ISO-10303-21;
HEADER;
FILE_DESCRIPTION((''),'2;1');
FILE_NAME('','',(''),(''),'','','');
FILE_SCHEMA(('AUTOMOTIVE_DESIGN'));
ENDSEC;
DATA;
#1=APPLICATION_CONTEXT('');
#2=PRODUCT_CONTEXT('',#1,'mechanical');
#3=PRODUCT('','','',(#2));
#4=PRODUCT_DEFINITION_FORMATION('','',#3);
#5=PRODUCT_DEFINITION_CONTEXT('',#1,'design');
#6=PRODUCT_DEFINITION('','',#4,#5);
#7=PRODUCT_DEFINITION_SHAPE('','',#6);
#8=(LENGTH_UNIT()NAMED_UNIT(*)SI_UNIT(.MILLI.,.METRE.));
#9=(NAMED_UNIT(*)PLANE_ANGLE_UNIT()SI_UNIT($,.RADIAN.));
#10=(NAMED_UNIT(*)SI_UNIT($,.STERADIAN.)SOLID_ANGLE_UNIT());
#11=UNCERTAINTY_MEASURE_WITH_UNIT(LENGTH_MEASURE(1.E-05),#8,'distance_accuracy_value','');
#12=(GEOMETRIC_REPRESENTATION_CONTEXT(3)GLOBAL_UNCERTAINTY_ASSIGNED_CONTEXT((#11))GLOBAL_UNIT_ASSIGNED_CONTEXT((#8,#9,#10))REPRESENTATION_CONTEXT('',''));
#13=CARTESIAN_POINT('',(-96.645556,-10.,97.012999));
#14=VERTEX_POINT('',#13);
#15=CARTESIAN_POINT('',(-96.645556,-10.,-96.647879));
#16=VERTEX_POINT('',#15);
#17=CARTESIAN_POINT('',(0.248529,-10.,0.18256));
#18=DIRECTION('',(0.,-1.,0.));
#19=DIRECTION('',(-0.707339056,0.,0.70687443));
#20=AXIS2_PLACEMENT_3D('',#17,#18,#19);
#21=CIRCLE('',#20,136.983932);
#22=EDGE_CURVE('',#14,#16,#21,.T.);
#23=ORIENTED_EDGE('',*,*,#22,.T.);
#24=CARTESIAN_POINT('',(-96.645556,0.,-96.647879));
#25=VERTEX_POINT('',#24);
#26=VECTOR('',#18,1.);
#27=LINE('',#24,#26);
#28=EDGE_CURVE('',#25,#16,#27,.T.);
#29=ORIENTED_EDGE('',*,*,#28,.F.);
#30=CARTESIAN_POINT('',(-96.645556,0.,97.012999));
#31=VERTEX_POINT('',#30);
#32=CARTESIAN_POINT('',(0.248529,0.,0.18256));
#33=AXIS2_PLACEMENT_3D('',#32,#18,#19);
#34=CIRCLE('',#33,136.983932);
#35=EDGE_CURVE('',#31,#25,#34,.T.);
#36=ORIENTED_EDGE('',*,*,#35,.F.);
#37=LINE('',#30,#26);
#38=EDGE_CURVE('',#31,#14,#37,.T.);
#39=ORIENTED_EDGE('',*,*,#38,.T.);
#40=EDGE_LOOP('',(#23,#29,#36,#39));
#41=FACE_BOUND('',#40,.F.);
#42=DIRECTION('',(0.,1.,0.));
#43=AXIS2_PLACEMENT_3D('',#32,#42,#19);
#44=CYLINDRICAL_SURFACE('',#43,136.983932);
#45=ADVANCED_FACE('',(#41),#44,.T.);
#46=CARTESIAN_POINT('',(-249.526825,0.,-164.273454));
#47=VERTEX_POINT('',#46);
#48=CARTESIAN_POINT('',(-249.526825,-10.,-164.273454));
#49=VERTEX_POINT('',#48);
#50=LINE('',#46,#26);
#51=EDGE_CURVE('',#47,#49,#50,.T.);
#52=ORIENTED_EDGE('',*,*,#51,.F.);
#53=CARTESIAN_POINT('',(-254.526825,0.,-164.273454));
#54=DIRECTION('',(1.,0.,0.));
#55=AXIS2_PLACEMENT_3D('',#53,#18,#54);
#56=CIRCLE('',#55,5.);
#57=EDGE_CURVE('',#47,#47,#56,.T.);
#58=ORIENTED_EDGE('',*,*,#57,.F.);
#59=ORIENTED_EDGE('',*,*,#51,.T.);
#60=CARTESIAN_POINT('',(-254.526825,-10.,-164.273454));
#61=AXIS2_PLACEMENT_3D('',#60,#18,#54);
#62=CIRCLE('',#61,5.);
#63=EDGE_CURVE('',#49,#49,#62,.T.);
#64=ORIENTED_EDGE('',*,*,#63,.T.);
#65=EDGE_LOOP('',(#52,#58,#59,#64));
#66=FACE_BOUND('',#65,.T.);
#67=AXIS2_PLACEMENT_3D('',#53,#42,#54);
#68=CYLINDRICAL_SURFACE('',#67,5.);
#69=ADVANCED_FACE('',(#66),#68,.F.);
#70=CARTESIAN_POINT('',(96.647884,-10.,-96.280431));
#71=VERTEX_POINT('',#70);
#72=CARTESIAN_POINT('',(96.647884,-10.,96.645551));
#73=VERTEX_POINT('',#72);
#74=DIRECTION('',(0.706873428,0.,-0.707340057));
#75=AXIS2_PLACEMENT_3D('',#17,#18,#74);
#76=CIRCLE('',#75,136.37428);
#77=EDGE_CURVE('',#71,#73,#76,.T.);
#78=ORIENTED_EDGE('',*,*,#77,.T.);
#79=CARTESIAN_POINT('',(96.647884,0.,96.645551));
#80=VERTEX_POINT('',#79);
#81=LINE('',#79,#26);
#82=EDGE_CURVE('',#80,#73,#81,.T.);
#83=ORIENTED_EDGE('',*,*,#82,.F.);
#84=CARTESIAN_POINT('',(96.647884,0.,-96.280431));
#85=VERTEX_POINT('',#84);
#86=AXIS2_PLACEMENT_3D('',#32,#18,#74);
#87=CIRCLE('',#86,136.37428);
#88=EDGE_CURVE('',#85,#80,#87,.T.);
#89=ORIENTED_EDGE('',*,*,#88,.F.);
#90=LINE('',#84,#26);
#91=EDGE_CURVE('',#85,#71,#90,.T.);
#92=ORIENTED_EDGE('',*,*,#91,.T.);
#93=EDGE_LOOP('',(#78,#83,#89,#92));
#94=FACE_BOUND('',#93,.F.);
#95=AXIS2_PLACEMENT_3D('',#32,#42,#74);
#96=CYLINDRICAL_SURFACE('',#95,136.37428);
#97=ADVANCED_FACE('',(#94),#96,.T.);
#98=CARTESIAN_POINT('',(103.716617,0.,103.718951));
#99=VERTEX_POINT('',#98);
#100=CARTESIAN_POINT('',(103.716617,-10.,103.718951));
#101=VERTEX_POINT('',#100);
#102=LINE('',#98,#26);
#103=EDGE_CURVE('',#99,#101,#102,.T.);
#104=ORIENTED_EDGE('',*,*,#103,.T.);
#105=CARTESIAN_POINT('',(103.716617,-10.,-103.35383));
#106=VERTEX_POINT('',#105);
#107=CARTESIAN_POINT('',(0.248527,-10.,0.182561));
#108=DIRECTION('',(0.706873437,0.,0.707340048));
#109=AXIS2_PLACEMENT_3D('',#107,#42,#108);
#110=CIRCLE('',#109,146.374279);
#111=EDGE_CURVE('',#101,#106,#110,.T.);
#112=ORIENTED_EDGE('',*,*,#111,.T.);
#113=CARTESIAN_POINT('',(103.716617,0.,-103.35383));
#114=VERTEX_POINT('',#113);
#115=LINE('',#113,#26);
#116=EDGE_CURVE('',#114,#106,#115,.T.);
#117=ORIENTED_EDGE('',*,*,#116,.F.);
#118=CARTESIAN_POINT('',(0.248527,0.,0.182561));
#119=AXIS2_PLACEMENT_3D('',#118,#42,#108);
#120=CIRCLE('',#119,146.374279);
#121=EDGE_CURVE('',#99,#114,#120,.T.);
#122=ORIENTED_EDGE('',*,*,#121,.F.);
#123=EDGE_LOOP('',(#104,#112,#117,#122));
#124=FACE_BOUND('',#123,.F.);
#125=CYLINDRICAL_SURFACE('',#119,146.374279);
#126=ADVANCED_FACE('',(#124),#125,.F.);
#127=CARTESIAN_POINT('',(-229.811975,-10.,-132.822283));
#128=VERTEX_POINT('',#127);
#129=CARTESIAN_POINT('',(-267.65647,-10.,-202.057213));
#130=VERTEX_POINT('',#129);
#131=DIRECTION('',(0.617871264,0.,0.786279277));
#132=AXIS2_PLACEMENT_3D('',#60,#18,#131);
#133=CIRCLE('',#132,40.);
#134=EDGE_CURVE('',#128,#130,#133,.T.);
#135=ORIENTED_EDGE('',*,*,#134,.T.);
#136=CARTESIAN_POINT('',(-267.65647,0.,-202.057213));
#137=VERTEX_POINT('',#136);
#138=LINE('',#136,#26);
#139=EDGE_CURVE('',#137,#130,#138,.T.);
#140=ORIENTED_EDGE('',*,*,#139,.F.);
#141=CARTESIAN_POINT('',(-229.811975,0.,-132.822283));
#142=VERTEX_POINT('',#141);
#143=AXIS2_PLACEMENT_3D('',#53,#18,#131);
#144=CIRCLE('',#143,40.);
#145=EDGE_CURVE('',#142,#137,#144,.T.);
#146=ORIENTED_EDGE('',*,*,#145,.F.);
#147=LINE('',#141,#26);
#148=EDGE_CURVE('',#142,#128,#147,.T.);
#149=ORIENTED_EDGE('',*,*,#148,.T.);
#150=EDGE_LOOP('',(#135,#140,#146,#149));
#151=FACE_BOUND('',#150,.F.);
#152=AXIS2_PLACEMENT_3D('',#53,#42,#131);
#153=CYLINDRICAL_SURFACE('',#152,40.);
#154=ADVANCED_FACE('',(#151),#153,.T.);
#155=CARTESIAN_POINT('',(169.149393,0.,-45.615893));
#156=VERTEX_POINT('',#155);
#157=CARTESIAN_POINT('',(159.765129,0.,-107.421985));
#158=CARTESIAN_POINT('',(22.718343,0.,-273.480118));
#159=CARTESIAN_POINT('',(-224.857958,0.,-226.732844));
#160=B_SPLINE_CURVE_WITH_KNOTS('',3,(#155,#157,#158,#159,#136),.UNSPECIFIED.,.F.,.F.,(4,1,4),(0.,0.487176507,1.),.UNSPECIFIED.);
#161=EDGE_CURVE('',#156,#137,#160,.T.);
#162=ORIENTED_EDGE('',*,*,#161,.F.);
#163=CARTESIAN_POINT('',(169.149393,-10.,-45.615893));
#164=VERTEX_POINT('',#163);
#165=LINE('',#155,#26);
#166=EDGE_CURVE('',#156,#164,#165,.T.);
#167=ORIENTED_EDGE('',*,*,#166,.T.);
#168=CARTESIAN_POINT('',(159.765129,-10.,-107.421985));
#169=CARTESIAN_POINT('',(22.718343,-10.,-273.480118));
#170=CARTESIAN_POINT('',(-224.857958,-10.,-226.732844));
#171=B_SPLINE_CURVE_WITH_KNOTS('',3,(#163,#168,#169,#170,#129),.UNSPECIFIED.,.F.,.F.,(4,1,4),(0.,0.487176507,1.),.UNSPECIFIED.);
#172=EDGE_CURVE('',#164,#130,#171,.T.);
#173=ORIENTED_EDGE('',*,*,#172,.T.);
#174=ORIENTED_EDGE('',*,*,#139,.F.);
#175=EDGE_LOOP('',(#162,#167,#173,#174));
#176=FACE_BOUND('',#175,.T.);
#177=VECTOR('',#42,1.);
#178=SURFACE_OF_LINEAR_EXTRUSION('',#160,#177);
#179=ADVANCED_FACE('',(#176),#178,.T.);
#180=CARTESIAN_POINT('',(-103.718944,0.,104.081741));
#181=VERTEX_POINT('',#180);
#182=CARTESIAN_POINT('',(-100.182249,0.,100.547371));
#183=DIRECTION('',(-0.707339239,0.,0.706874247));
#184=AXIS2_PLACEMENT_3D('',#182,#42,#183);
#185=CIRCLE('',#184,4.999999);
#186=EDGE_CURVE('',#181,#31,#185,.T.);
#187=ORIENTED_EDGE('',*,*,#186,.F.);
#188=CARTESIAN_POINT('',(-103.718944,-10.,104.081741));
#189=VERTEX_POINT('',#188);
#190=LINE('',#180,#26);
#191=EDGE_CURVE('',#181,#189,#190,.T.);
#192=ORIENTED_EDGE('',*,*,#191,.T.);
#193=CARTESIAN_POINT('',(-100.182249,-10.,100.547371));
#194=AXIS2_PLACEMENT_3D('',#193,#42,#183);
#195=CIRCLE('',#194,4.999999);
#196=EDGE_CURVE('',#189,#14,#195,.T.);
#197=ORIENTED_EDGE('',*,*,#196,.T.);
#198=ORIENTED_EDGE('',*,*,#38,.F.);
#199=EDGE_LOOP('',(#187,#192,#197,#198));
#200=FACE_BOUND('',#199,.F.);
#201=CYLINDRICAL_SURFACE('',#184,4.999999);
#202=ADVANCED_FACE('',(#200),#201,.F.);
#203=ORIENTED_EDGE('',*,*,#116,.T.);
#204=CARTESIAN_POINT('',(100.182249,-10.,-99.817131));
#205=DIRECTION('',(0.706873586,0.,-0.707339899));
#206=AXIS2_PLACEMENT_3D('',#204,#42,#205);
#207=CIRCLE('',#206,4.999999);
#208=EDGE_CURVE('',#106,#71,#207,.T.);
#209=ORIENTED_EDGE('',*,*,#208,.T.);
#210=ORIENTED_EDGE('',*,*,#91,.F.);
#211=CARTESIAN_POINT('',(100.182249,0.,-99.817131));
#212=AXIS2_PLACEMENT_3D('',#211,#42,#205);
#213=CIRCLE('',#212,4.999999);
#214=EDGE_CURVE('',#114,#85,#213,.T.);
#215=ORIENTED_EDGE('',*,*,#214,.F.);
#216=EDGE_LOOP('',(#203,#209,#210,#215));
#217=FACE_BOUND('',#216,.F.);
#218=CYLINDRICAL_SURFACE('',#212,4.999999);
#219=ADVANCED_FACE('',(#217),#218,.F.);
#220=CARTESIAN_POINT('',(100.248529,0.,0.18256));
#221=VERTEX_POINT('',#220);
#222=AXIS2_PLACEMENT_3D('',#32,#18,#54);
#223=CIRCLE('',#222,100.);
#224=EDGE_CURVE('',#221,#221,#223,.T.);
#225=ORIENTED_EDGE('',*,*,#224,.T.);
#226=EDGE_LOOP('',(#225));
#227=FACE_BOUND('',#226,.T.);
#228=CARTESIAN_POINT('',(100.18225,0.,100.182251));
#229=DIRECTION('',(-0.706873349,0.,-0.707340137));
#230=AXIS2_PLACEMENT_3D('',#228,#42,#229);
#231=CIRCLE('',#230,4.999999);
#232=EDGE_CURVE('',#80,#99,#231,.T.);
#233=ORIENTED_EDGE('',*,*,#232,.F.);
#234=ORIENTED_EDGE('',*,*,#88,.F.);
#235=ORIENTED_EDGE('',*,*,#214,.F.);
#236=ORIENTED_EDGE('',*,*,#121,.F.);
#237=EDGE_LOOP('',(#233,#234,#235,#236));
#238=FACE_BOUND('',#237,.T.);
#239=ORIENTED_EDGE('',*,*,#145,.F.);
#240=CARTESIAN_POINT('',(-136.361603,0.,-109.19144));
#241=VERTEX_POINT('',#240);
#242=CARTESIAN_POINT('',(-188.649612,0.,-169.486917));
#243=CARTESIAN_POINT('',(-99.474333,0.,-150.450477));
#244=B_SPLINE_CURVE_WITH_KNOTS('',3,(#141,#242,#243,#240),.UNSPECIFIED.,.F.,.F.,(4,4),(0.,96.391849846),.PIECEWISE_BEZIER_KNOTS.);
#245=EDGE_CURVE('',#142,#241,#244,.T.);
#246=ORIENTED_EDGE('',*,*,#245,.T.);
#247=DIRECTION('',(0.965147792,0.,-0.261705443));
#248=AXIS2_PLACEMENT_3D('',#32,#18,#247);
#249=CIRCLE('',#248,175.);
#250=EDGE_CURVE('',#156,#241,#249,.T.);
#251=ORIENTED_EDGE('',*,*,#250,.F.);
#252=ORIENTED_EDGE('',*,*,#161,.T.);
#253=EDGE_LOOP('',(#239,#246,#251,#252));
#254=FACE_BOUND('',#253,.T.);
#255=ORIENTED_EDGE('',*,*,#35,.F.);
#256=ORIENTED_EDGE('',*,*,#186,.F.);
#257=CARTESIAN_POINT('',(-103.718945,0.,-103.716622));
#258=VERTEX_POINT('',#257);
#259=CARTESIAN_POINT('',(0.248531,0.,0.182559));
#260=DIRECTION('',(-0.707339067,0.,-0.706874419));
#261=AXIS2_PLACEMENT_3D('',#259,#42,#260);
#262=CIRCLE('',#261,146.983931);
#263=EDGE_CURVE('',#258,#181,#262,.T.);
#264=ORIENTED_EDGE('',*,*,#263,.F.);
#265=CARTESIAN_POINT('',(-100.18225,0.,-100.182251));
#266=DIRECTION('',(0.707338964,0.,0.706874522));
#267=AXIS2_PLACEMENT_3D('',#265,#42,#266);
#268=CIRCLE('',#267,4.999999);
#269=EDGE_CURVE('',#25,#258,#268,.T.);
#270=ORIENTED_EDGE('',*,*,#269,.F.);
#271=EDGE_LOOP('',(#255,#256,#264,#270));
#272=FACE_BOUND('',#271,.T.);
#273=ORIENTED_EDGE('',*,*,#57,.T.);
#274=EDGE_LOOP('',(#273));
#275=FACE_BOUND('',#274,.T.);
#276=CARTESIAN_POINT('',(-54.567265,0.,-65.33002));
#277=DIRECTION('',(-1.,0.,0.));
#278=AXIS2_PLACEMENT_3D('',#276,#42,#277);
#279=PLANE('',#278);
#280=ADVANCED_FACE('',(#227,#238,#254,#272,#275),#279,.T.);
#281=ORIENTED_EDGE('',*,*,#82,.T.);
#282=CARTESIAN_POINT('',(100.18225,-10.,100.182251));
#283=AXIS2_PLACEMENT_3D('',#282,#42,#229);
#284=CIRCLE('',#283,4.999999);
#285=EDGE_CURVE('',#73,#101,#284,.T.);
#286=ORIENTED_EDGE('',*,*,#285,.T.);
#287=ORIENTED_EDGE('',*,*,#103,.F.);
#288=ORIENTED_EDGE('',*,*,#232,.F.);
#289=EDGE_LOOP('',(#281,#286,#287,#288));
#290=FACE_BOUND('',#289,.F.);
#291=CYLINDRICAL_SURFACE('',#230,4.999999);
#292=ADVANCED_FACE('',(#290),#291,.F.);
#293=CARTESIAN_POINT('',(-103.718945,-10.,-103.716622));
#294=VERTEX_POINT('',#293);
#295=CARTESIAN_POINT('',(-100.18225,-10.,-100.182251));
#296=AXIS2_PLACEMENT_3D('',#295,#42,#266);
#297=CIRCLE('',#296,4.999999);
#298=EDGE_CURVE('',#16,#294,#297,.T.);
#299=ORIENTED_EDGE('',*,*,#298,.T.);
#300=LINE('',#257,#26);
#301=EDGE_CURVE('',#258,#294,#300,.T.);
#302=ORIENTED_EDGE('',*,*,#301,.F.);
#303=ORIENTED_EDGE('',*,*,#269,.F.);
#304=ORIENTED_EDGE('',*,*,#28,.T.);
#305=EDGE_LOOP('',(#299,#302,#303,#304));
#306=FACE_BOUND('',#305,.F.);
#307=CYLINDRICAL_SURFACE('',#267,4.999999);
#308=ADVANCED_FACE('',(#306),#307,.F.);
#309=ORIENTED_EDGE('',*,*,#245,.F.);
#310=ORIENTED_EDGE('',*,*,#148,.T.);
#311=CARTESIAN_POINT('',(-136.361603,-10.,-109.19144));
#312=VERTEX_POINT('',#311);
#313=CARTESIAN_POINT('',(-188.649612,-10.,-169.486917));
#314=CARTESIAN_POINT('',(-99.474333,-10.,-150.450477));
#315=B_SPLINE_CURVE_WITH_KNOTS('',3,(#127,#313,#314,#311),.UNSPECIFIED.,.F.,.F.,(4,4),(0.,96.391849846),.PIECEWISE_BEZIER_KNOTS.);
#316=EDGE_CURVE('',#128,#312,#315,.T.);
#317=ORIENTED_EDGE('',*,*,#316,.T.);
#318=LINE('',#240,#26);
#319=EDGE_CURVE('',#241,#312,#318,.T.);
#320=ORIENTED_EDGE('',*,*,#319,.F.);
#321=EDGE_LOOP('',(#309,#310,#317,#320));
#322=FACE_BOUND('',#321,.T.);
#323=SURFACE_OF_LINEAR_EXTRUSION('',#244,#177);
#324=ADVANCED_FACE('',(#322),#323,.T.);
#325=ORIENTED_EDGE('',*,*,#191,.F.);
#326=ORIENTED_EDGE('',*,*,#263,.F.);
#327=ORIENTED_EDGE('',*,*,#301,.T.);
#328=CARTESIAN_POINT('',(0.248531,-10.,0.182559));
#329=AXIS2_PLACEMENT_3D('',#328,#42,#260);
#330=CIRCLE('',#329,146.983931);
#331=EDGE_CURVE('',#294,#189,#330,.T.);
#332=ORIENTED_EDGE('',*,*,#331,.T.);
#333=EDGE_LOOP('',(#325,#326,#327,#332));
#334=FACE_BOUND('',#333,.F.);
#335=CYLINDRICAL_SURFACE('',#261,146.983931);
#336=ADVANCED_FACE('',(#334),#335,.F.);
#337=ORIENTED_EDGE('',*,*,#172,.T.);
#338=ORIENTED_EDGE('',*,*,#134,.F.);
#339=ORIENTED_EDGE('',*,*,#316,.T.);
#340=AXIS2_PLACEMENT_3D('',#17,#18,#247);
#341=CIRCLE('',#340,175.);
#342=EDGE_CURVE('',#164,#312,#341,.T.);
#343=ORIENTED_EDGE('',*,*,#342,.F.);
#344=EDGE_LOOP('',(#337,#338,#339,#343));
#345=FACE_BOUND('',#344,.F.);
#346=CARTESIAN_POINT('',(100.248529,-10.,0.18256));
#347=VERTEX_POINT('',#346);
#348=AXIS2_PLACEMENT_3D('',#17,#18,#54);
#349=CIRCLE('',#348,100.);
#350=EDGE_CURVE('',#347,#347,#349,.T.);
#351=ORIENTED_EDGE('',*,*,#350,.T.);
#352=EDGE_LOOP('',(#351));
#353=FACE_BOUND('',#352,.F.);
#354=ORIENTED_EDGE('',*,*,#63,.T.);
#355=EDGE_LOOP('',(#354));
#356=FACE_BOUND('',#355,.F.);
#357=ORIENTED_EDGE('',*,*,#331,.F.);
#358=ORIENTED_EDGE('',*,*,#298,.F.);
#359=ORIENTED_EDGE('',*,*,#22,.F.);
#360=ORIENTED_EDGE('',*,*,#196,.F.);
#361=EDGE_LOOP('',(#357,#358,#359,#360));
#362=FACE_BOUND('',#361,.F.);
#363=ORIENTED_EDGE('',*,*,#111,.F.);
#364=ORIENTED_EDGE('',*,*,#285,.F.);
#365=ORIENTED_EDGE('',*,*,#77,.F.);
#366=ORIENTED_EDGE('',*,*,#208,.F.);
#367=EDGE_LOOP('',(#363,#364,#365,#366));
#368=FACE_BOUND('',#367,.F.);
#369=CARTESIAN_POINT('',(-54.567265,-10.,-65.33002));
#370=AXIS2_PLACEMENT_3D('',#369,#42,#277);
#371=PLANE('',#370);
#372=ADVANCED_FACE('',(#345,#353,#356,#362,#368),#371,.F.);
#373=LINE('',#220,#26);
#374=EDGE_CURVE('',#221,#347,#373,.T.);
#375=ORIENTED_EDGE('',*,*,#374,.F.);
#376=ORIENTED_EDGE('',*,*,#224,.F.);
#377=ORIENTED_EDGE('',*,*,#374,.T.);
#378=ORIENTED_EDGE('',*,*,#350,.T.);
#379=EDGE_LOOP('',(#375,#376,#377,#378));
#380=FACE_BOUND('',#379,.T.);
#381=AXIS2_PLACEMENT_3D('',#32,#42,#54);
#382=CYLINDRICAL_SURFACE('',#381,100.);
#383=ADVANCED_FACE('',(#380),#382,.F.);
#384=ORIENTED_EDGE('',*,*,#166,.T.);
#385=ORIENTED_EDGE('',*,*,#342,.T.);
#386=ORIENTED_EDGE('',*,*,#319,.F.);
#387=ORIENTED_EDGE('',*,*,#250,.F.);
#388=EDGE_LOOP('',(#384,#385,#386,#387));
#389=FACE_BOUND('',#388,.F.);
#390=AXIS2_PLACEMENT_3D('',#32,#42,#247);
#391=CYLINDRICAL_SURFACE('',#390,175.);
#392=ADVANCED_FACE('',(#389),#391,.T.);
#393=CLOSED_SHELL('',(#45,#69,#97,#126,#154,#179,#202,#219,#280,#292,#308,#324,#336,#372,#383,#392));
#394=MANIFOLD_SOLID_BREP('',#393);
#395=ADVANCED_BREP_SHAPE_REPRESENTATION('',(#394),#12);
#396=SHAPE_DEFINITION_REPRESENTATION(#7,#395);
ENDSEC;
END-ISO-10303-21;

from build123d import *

# Parameters (mm, degrees)
F0_R     = 5
F0_R_2   = 100
F1_DEPTH = 10


# Not quite as in the source:
# - ends of sketch curves that miss each other by under 0.0002 mm in the source are joined


with BuildPart() as f1:
    # F0 (on Front) → F1 (new body)
    with BuildSketch(Plane.XZ):
        with BuildLine():
            add(Edge.make_bspline(
                [(169.1493929479, -45.6158926146), (159.7651292122, -107.4219847214), (22.7183427382, -273.4801182779), (-224.8579575674, -226.7328438), (-267.6564696794, -202.0572125126)],
                knots=[0, 0, 0, 0, 0.4871765071, 1, 1, 1, 1], degree=3))
            ThreePointArc((169.1493929479, -45.6158926146), (-35.404456431, 171.5122555076), (-136.3616027906, -109.1914398753))
            add(Edge.make_bspline(
                [(-229.8119745952, -132.8222825671), (-188.6496121839, -169.4869168537), (-99.4743329729, -150.4504772299), (-136.3616027906, -109.1914398753)],
                knots=[0, 0, 0, 0, 96.391849846, 96.391849846, 96.391849846, 96.391849846], degree=3))
            ThreePointArc((-229.8119745952, -132.8222825671), (-289.6255876831, -145.0881241092), (-267.6564696794, -202.0572125126))
        make_face()
        with Locations((-254.5268251568, -164.2734536378)):
            Circle(F0_R, mode=Mode.SUBTRACT)
        with BuildLine():
            ThreePointArc((-96.6455557461, 97.0129985964), (-136.73540255, 0.1825598604), (-96.6455557461, -96.6478788756))
            ThreePointArc((-96.6455557461, -96.6478788756), (-96.6478779601, -103.7189453909), (-103.7189453903, -103.7166222615))
            ThreePointArc((-103.7189453903, -103.7166222615), (-146.7353999615, 0.1825598604), (-103.7189444749, 104.0817410675))
            ThreePointArc((-103.7189444749, 104.0817410675), (-96.6478779601, 104.0840651118), (-96.6455557461, 97.0129985964))
        make_face(mode=Mode.SUBTRACT)
        with Locations((0.2485292707, 0.1825598604)):
            Circle(F0_R_2, mode=Mode.SUBTRACT)
        with BuildLine():
            ThreePointArc((96.6478838863, -96.2804310179), (136.6228090286, 0.1825598604), (96.6478838863, 96.6455507387))
            ThreePointArc((96.6478838863, 96.6455507387), (96.6455499466, 103.7166173731), (103.7166173736, 103.7189505206))
            ThreePointArc((103.7166173736, 103.7189505206), (146.6228067875, 0.1825598604), (103.7166165815, -103.3538300071))
            ThreePointArc((103.7166165815, -103.3538300071), (96.6455499466, -103.3514976522), (96.6478838863, -96.2804310179))
        make_face(mode=Mode.SUBTRACT)
    extrude(amount=F1_DEPTH)


solid = f1.part
